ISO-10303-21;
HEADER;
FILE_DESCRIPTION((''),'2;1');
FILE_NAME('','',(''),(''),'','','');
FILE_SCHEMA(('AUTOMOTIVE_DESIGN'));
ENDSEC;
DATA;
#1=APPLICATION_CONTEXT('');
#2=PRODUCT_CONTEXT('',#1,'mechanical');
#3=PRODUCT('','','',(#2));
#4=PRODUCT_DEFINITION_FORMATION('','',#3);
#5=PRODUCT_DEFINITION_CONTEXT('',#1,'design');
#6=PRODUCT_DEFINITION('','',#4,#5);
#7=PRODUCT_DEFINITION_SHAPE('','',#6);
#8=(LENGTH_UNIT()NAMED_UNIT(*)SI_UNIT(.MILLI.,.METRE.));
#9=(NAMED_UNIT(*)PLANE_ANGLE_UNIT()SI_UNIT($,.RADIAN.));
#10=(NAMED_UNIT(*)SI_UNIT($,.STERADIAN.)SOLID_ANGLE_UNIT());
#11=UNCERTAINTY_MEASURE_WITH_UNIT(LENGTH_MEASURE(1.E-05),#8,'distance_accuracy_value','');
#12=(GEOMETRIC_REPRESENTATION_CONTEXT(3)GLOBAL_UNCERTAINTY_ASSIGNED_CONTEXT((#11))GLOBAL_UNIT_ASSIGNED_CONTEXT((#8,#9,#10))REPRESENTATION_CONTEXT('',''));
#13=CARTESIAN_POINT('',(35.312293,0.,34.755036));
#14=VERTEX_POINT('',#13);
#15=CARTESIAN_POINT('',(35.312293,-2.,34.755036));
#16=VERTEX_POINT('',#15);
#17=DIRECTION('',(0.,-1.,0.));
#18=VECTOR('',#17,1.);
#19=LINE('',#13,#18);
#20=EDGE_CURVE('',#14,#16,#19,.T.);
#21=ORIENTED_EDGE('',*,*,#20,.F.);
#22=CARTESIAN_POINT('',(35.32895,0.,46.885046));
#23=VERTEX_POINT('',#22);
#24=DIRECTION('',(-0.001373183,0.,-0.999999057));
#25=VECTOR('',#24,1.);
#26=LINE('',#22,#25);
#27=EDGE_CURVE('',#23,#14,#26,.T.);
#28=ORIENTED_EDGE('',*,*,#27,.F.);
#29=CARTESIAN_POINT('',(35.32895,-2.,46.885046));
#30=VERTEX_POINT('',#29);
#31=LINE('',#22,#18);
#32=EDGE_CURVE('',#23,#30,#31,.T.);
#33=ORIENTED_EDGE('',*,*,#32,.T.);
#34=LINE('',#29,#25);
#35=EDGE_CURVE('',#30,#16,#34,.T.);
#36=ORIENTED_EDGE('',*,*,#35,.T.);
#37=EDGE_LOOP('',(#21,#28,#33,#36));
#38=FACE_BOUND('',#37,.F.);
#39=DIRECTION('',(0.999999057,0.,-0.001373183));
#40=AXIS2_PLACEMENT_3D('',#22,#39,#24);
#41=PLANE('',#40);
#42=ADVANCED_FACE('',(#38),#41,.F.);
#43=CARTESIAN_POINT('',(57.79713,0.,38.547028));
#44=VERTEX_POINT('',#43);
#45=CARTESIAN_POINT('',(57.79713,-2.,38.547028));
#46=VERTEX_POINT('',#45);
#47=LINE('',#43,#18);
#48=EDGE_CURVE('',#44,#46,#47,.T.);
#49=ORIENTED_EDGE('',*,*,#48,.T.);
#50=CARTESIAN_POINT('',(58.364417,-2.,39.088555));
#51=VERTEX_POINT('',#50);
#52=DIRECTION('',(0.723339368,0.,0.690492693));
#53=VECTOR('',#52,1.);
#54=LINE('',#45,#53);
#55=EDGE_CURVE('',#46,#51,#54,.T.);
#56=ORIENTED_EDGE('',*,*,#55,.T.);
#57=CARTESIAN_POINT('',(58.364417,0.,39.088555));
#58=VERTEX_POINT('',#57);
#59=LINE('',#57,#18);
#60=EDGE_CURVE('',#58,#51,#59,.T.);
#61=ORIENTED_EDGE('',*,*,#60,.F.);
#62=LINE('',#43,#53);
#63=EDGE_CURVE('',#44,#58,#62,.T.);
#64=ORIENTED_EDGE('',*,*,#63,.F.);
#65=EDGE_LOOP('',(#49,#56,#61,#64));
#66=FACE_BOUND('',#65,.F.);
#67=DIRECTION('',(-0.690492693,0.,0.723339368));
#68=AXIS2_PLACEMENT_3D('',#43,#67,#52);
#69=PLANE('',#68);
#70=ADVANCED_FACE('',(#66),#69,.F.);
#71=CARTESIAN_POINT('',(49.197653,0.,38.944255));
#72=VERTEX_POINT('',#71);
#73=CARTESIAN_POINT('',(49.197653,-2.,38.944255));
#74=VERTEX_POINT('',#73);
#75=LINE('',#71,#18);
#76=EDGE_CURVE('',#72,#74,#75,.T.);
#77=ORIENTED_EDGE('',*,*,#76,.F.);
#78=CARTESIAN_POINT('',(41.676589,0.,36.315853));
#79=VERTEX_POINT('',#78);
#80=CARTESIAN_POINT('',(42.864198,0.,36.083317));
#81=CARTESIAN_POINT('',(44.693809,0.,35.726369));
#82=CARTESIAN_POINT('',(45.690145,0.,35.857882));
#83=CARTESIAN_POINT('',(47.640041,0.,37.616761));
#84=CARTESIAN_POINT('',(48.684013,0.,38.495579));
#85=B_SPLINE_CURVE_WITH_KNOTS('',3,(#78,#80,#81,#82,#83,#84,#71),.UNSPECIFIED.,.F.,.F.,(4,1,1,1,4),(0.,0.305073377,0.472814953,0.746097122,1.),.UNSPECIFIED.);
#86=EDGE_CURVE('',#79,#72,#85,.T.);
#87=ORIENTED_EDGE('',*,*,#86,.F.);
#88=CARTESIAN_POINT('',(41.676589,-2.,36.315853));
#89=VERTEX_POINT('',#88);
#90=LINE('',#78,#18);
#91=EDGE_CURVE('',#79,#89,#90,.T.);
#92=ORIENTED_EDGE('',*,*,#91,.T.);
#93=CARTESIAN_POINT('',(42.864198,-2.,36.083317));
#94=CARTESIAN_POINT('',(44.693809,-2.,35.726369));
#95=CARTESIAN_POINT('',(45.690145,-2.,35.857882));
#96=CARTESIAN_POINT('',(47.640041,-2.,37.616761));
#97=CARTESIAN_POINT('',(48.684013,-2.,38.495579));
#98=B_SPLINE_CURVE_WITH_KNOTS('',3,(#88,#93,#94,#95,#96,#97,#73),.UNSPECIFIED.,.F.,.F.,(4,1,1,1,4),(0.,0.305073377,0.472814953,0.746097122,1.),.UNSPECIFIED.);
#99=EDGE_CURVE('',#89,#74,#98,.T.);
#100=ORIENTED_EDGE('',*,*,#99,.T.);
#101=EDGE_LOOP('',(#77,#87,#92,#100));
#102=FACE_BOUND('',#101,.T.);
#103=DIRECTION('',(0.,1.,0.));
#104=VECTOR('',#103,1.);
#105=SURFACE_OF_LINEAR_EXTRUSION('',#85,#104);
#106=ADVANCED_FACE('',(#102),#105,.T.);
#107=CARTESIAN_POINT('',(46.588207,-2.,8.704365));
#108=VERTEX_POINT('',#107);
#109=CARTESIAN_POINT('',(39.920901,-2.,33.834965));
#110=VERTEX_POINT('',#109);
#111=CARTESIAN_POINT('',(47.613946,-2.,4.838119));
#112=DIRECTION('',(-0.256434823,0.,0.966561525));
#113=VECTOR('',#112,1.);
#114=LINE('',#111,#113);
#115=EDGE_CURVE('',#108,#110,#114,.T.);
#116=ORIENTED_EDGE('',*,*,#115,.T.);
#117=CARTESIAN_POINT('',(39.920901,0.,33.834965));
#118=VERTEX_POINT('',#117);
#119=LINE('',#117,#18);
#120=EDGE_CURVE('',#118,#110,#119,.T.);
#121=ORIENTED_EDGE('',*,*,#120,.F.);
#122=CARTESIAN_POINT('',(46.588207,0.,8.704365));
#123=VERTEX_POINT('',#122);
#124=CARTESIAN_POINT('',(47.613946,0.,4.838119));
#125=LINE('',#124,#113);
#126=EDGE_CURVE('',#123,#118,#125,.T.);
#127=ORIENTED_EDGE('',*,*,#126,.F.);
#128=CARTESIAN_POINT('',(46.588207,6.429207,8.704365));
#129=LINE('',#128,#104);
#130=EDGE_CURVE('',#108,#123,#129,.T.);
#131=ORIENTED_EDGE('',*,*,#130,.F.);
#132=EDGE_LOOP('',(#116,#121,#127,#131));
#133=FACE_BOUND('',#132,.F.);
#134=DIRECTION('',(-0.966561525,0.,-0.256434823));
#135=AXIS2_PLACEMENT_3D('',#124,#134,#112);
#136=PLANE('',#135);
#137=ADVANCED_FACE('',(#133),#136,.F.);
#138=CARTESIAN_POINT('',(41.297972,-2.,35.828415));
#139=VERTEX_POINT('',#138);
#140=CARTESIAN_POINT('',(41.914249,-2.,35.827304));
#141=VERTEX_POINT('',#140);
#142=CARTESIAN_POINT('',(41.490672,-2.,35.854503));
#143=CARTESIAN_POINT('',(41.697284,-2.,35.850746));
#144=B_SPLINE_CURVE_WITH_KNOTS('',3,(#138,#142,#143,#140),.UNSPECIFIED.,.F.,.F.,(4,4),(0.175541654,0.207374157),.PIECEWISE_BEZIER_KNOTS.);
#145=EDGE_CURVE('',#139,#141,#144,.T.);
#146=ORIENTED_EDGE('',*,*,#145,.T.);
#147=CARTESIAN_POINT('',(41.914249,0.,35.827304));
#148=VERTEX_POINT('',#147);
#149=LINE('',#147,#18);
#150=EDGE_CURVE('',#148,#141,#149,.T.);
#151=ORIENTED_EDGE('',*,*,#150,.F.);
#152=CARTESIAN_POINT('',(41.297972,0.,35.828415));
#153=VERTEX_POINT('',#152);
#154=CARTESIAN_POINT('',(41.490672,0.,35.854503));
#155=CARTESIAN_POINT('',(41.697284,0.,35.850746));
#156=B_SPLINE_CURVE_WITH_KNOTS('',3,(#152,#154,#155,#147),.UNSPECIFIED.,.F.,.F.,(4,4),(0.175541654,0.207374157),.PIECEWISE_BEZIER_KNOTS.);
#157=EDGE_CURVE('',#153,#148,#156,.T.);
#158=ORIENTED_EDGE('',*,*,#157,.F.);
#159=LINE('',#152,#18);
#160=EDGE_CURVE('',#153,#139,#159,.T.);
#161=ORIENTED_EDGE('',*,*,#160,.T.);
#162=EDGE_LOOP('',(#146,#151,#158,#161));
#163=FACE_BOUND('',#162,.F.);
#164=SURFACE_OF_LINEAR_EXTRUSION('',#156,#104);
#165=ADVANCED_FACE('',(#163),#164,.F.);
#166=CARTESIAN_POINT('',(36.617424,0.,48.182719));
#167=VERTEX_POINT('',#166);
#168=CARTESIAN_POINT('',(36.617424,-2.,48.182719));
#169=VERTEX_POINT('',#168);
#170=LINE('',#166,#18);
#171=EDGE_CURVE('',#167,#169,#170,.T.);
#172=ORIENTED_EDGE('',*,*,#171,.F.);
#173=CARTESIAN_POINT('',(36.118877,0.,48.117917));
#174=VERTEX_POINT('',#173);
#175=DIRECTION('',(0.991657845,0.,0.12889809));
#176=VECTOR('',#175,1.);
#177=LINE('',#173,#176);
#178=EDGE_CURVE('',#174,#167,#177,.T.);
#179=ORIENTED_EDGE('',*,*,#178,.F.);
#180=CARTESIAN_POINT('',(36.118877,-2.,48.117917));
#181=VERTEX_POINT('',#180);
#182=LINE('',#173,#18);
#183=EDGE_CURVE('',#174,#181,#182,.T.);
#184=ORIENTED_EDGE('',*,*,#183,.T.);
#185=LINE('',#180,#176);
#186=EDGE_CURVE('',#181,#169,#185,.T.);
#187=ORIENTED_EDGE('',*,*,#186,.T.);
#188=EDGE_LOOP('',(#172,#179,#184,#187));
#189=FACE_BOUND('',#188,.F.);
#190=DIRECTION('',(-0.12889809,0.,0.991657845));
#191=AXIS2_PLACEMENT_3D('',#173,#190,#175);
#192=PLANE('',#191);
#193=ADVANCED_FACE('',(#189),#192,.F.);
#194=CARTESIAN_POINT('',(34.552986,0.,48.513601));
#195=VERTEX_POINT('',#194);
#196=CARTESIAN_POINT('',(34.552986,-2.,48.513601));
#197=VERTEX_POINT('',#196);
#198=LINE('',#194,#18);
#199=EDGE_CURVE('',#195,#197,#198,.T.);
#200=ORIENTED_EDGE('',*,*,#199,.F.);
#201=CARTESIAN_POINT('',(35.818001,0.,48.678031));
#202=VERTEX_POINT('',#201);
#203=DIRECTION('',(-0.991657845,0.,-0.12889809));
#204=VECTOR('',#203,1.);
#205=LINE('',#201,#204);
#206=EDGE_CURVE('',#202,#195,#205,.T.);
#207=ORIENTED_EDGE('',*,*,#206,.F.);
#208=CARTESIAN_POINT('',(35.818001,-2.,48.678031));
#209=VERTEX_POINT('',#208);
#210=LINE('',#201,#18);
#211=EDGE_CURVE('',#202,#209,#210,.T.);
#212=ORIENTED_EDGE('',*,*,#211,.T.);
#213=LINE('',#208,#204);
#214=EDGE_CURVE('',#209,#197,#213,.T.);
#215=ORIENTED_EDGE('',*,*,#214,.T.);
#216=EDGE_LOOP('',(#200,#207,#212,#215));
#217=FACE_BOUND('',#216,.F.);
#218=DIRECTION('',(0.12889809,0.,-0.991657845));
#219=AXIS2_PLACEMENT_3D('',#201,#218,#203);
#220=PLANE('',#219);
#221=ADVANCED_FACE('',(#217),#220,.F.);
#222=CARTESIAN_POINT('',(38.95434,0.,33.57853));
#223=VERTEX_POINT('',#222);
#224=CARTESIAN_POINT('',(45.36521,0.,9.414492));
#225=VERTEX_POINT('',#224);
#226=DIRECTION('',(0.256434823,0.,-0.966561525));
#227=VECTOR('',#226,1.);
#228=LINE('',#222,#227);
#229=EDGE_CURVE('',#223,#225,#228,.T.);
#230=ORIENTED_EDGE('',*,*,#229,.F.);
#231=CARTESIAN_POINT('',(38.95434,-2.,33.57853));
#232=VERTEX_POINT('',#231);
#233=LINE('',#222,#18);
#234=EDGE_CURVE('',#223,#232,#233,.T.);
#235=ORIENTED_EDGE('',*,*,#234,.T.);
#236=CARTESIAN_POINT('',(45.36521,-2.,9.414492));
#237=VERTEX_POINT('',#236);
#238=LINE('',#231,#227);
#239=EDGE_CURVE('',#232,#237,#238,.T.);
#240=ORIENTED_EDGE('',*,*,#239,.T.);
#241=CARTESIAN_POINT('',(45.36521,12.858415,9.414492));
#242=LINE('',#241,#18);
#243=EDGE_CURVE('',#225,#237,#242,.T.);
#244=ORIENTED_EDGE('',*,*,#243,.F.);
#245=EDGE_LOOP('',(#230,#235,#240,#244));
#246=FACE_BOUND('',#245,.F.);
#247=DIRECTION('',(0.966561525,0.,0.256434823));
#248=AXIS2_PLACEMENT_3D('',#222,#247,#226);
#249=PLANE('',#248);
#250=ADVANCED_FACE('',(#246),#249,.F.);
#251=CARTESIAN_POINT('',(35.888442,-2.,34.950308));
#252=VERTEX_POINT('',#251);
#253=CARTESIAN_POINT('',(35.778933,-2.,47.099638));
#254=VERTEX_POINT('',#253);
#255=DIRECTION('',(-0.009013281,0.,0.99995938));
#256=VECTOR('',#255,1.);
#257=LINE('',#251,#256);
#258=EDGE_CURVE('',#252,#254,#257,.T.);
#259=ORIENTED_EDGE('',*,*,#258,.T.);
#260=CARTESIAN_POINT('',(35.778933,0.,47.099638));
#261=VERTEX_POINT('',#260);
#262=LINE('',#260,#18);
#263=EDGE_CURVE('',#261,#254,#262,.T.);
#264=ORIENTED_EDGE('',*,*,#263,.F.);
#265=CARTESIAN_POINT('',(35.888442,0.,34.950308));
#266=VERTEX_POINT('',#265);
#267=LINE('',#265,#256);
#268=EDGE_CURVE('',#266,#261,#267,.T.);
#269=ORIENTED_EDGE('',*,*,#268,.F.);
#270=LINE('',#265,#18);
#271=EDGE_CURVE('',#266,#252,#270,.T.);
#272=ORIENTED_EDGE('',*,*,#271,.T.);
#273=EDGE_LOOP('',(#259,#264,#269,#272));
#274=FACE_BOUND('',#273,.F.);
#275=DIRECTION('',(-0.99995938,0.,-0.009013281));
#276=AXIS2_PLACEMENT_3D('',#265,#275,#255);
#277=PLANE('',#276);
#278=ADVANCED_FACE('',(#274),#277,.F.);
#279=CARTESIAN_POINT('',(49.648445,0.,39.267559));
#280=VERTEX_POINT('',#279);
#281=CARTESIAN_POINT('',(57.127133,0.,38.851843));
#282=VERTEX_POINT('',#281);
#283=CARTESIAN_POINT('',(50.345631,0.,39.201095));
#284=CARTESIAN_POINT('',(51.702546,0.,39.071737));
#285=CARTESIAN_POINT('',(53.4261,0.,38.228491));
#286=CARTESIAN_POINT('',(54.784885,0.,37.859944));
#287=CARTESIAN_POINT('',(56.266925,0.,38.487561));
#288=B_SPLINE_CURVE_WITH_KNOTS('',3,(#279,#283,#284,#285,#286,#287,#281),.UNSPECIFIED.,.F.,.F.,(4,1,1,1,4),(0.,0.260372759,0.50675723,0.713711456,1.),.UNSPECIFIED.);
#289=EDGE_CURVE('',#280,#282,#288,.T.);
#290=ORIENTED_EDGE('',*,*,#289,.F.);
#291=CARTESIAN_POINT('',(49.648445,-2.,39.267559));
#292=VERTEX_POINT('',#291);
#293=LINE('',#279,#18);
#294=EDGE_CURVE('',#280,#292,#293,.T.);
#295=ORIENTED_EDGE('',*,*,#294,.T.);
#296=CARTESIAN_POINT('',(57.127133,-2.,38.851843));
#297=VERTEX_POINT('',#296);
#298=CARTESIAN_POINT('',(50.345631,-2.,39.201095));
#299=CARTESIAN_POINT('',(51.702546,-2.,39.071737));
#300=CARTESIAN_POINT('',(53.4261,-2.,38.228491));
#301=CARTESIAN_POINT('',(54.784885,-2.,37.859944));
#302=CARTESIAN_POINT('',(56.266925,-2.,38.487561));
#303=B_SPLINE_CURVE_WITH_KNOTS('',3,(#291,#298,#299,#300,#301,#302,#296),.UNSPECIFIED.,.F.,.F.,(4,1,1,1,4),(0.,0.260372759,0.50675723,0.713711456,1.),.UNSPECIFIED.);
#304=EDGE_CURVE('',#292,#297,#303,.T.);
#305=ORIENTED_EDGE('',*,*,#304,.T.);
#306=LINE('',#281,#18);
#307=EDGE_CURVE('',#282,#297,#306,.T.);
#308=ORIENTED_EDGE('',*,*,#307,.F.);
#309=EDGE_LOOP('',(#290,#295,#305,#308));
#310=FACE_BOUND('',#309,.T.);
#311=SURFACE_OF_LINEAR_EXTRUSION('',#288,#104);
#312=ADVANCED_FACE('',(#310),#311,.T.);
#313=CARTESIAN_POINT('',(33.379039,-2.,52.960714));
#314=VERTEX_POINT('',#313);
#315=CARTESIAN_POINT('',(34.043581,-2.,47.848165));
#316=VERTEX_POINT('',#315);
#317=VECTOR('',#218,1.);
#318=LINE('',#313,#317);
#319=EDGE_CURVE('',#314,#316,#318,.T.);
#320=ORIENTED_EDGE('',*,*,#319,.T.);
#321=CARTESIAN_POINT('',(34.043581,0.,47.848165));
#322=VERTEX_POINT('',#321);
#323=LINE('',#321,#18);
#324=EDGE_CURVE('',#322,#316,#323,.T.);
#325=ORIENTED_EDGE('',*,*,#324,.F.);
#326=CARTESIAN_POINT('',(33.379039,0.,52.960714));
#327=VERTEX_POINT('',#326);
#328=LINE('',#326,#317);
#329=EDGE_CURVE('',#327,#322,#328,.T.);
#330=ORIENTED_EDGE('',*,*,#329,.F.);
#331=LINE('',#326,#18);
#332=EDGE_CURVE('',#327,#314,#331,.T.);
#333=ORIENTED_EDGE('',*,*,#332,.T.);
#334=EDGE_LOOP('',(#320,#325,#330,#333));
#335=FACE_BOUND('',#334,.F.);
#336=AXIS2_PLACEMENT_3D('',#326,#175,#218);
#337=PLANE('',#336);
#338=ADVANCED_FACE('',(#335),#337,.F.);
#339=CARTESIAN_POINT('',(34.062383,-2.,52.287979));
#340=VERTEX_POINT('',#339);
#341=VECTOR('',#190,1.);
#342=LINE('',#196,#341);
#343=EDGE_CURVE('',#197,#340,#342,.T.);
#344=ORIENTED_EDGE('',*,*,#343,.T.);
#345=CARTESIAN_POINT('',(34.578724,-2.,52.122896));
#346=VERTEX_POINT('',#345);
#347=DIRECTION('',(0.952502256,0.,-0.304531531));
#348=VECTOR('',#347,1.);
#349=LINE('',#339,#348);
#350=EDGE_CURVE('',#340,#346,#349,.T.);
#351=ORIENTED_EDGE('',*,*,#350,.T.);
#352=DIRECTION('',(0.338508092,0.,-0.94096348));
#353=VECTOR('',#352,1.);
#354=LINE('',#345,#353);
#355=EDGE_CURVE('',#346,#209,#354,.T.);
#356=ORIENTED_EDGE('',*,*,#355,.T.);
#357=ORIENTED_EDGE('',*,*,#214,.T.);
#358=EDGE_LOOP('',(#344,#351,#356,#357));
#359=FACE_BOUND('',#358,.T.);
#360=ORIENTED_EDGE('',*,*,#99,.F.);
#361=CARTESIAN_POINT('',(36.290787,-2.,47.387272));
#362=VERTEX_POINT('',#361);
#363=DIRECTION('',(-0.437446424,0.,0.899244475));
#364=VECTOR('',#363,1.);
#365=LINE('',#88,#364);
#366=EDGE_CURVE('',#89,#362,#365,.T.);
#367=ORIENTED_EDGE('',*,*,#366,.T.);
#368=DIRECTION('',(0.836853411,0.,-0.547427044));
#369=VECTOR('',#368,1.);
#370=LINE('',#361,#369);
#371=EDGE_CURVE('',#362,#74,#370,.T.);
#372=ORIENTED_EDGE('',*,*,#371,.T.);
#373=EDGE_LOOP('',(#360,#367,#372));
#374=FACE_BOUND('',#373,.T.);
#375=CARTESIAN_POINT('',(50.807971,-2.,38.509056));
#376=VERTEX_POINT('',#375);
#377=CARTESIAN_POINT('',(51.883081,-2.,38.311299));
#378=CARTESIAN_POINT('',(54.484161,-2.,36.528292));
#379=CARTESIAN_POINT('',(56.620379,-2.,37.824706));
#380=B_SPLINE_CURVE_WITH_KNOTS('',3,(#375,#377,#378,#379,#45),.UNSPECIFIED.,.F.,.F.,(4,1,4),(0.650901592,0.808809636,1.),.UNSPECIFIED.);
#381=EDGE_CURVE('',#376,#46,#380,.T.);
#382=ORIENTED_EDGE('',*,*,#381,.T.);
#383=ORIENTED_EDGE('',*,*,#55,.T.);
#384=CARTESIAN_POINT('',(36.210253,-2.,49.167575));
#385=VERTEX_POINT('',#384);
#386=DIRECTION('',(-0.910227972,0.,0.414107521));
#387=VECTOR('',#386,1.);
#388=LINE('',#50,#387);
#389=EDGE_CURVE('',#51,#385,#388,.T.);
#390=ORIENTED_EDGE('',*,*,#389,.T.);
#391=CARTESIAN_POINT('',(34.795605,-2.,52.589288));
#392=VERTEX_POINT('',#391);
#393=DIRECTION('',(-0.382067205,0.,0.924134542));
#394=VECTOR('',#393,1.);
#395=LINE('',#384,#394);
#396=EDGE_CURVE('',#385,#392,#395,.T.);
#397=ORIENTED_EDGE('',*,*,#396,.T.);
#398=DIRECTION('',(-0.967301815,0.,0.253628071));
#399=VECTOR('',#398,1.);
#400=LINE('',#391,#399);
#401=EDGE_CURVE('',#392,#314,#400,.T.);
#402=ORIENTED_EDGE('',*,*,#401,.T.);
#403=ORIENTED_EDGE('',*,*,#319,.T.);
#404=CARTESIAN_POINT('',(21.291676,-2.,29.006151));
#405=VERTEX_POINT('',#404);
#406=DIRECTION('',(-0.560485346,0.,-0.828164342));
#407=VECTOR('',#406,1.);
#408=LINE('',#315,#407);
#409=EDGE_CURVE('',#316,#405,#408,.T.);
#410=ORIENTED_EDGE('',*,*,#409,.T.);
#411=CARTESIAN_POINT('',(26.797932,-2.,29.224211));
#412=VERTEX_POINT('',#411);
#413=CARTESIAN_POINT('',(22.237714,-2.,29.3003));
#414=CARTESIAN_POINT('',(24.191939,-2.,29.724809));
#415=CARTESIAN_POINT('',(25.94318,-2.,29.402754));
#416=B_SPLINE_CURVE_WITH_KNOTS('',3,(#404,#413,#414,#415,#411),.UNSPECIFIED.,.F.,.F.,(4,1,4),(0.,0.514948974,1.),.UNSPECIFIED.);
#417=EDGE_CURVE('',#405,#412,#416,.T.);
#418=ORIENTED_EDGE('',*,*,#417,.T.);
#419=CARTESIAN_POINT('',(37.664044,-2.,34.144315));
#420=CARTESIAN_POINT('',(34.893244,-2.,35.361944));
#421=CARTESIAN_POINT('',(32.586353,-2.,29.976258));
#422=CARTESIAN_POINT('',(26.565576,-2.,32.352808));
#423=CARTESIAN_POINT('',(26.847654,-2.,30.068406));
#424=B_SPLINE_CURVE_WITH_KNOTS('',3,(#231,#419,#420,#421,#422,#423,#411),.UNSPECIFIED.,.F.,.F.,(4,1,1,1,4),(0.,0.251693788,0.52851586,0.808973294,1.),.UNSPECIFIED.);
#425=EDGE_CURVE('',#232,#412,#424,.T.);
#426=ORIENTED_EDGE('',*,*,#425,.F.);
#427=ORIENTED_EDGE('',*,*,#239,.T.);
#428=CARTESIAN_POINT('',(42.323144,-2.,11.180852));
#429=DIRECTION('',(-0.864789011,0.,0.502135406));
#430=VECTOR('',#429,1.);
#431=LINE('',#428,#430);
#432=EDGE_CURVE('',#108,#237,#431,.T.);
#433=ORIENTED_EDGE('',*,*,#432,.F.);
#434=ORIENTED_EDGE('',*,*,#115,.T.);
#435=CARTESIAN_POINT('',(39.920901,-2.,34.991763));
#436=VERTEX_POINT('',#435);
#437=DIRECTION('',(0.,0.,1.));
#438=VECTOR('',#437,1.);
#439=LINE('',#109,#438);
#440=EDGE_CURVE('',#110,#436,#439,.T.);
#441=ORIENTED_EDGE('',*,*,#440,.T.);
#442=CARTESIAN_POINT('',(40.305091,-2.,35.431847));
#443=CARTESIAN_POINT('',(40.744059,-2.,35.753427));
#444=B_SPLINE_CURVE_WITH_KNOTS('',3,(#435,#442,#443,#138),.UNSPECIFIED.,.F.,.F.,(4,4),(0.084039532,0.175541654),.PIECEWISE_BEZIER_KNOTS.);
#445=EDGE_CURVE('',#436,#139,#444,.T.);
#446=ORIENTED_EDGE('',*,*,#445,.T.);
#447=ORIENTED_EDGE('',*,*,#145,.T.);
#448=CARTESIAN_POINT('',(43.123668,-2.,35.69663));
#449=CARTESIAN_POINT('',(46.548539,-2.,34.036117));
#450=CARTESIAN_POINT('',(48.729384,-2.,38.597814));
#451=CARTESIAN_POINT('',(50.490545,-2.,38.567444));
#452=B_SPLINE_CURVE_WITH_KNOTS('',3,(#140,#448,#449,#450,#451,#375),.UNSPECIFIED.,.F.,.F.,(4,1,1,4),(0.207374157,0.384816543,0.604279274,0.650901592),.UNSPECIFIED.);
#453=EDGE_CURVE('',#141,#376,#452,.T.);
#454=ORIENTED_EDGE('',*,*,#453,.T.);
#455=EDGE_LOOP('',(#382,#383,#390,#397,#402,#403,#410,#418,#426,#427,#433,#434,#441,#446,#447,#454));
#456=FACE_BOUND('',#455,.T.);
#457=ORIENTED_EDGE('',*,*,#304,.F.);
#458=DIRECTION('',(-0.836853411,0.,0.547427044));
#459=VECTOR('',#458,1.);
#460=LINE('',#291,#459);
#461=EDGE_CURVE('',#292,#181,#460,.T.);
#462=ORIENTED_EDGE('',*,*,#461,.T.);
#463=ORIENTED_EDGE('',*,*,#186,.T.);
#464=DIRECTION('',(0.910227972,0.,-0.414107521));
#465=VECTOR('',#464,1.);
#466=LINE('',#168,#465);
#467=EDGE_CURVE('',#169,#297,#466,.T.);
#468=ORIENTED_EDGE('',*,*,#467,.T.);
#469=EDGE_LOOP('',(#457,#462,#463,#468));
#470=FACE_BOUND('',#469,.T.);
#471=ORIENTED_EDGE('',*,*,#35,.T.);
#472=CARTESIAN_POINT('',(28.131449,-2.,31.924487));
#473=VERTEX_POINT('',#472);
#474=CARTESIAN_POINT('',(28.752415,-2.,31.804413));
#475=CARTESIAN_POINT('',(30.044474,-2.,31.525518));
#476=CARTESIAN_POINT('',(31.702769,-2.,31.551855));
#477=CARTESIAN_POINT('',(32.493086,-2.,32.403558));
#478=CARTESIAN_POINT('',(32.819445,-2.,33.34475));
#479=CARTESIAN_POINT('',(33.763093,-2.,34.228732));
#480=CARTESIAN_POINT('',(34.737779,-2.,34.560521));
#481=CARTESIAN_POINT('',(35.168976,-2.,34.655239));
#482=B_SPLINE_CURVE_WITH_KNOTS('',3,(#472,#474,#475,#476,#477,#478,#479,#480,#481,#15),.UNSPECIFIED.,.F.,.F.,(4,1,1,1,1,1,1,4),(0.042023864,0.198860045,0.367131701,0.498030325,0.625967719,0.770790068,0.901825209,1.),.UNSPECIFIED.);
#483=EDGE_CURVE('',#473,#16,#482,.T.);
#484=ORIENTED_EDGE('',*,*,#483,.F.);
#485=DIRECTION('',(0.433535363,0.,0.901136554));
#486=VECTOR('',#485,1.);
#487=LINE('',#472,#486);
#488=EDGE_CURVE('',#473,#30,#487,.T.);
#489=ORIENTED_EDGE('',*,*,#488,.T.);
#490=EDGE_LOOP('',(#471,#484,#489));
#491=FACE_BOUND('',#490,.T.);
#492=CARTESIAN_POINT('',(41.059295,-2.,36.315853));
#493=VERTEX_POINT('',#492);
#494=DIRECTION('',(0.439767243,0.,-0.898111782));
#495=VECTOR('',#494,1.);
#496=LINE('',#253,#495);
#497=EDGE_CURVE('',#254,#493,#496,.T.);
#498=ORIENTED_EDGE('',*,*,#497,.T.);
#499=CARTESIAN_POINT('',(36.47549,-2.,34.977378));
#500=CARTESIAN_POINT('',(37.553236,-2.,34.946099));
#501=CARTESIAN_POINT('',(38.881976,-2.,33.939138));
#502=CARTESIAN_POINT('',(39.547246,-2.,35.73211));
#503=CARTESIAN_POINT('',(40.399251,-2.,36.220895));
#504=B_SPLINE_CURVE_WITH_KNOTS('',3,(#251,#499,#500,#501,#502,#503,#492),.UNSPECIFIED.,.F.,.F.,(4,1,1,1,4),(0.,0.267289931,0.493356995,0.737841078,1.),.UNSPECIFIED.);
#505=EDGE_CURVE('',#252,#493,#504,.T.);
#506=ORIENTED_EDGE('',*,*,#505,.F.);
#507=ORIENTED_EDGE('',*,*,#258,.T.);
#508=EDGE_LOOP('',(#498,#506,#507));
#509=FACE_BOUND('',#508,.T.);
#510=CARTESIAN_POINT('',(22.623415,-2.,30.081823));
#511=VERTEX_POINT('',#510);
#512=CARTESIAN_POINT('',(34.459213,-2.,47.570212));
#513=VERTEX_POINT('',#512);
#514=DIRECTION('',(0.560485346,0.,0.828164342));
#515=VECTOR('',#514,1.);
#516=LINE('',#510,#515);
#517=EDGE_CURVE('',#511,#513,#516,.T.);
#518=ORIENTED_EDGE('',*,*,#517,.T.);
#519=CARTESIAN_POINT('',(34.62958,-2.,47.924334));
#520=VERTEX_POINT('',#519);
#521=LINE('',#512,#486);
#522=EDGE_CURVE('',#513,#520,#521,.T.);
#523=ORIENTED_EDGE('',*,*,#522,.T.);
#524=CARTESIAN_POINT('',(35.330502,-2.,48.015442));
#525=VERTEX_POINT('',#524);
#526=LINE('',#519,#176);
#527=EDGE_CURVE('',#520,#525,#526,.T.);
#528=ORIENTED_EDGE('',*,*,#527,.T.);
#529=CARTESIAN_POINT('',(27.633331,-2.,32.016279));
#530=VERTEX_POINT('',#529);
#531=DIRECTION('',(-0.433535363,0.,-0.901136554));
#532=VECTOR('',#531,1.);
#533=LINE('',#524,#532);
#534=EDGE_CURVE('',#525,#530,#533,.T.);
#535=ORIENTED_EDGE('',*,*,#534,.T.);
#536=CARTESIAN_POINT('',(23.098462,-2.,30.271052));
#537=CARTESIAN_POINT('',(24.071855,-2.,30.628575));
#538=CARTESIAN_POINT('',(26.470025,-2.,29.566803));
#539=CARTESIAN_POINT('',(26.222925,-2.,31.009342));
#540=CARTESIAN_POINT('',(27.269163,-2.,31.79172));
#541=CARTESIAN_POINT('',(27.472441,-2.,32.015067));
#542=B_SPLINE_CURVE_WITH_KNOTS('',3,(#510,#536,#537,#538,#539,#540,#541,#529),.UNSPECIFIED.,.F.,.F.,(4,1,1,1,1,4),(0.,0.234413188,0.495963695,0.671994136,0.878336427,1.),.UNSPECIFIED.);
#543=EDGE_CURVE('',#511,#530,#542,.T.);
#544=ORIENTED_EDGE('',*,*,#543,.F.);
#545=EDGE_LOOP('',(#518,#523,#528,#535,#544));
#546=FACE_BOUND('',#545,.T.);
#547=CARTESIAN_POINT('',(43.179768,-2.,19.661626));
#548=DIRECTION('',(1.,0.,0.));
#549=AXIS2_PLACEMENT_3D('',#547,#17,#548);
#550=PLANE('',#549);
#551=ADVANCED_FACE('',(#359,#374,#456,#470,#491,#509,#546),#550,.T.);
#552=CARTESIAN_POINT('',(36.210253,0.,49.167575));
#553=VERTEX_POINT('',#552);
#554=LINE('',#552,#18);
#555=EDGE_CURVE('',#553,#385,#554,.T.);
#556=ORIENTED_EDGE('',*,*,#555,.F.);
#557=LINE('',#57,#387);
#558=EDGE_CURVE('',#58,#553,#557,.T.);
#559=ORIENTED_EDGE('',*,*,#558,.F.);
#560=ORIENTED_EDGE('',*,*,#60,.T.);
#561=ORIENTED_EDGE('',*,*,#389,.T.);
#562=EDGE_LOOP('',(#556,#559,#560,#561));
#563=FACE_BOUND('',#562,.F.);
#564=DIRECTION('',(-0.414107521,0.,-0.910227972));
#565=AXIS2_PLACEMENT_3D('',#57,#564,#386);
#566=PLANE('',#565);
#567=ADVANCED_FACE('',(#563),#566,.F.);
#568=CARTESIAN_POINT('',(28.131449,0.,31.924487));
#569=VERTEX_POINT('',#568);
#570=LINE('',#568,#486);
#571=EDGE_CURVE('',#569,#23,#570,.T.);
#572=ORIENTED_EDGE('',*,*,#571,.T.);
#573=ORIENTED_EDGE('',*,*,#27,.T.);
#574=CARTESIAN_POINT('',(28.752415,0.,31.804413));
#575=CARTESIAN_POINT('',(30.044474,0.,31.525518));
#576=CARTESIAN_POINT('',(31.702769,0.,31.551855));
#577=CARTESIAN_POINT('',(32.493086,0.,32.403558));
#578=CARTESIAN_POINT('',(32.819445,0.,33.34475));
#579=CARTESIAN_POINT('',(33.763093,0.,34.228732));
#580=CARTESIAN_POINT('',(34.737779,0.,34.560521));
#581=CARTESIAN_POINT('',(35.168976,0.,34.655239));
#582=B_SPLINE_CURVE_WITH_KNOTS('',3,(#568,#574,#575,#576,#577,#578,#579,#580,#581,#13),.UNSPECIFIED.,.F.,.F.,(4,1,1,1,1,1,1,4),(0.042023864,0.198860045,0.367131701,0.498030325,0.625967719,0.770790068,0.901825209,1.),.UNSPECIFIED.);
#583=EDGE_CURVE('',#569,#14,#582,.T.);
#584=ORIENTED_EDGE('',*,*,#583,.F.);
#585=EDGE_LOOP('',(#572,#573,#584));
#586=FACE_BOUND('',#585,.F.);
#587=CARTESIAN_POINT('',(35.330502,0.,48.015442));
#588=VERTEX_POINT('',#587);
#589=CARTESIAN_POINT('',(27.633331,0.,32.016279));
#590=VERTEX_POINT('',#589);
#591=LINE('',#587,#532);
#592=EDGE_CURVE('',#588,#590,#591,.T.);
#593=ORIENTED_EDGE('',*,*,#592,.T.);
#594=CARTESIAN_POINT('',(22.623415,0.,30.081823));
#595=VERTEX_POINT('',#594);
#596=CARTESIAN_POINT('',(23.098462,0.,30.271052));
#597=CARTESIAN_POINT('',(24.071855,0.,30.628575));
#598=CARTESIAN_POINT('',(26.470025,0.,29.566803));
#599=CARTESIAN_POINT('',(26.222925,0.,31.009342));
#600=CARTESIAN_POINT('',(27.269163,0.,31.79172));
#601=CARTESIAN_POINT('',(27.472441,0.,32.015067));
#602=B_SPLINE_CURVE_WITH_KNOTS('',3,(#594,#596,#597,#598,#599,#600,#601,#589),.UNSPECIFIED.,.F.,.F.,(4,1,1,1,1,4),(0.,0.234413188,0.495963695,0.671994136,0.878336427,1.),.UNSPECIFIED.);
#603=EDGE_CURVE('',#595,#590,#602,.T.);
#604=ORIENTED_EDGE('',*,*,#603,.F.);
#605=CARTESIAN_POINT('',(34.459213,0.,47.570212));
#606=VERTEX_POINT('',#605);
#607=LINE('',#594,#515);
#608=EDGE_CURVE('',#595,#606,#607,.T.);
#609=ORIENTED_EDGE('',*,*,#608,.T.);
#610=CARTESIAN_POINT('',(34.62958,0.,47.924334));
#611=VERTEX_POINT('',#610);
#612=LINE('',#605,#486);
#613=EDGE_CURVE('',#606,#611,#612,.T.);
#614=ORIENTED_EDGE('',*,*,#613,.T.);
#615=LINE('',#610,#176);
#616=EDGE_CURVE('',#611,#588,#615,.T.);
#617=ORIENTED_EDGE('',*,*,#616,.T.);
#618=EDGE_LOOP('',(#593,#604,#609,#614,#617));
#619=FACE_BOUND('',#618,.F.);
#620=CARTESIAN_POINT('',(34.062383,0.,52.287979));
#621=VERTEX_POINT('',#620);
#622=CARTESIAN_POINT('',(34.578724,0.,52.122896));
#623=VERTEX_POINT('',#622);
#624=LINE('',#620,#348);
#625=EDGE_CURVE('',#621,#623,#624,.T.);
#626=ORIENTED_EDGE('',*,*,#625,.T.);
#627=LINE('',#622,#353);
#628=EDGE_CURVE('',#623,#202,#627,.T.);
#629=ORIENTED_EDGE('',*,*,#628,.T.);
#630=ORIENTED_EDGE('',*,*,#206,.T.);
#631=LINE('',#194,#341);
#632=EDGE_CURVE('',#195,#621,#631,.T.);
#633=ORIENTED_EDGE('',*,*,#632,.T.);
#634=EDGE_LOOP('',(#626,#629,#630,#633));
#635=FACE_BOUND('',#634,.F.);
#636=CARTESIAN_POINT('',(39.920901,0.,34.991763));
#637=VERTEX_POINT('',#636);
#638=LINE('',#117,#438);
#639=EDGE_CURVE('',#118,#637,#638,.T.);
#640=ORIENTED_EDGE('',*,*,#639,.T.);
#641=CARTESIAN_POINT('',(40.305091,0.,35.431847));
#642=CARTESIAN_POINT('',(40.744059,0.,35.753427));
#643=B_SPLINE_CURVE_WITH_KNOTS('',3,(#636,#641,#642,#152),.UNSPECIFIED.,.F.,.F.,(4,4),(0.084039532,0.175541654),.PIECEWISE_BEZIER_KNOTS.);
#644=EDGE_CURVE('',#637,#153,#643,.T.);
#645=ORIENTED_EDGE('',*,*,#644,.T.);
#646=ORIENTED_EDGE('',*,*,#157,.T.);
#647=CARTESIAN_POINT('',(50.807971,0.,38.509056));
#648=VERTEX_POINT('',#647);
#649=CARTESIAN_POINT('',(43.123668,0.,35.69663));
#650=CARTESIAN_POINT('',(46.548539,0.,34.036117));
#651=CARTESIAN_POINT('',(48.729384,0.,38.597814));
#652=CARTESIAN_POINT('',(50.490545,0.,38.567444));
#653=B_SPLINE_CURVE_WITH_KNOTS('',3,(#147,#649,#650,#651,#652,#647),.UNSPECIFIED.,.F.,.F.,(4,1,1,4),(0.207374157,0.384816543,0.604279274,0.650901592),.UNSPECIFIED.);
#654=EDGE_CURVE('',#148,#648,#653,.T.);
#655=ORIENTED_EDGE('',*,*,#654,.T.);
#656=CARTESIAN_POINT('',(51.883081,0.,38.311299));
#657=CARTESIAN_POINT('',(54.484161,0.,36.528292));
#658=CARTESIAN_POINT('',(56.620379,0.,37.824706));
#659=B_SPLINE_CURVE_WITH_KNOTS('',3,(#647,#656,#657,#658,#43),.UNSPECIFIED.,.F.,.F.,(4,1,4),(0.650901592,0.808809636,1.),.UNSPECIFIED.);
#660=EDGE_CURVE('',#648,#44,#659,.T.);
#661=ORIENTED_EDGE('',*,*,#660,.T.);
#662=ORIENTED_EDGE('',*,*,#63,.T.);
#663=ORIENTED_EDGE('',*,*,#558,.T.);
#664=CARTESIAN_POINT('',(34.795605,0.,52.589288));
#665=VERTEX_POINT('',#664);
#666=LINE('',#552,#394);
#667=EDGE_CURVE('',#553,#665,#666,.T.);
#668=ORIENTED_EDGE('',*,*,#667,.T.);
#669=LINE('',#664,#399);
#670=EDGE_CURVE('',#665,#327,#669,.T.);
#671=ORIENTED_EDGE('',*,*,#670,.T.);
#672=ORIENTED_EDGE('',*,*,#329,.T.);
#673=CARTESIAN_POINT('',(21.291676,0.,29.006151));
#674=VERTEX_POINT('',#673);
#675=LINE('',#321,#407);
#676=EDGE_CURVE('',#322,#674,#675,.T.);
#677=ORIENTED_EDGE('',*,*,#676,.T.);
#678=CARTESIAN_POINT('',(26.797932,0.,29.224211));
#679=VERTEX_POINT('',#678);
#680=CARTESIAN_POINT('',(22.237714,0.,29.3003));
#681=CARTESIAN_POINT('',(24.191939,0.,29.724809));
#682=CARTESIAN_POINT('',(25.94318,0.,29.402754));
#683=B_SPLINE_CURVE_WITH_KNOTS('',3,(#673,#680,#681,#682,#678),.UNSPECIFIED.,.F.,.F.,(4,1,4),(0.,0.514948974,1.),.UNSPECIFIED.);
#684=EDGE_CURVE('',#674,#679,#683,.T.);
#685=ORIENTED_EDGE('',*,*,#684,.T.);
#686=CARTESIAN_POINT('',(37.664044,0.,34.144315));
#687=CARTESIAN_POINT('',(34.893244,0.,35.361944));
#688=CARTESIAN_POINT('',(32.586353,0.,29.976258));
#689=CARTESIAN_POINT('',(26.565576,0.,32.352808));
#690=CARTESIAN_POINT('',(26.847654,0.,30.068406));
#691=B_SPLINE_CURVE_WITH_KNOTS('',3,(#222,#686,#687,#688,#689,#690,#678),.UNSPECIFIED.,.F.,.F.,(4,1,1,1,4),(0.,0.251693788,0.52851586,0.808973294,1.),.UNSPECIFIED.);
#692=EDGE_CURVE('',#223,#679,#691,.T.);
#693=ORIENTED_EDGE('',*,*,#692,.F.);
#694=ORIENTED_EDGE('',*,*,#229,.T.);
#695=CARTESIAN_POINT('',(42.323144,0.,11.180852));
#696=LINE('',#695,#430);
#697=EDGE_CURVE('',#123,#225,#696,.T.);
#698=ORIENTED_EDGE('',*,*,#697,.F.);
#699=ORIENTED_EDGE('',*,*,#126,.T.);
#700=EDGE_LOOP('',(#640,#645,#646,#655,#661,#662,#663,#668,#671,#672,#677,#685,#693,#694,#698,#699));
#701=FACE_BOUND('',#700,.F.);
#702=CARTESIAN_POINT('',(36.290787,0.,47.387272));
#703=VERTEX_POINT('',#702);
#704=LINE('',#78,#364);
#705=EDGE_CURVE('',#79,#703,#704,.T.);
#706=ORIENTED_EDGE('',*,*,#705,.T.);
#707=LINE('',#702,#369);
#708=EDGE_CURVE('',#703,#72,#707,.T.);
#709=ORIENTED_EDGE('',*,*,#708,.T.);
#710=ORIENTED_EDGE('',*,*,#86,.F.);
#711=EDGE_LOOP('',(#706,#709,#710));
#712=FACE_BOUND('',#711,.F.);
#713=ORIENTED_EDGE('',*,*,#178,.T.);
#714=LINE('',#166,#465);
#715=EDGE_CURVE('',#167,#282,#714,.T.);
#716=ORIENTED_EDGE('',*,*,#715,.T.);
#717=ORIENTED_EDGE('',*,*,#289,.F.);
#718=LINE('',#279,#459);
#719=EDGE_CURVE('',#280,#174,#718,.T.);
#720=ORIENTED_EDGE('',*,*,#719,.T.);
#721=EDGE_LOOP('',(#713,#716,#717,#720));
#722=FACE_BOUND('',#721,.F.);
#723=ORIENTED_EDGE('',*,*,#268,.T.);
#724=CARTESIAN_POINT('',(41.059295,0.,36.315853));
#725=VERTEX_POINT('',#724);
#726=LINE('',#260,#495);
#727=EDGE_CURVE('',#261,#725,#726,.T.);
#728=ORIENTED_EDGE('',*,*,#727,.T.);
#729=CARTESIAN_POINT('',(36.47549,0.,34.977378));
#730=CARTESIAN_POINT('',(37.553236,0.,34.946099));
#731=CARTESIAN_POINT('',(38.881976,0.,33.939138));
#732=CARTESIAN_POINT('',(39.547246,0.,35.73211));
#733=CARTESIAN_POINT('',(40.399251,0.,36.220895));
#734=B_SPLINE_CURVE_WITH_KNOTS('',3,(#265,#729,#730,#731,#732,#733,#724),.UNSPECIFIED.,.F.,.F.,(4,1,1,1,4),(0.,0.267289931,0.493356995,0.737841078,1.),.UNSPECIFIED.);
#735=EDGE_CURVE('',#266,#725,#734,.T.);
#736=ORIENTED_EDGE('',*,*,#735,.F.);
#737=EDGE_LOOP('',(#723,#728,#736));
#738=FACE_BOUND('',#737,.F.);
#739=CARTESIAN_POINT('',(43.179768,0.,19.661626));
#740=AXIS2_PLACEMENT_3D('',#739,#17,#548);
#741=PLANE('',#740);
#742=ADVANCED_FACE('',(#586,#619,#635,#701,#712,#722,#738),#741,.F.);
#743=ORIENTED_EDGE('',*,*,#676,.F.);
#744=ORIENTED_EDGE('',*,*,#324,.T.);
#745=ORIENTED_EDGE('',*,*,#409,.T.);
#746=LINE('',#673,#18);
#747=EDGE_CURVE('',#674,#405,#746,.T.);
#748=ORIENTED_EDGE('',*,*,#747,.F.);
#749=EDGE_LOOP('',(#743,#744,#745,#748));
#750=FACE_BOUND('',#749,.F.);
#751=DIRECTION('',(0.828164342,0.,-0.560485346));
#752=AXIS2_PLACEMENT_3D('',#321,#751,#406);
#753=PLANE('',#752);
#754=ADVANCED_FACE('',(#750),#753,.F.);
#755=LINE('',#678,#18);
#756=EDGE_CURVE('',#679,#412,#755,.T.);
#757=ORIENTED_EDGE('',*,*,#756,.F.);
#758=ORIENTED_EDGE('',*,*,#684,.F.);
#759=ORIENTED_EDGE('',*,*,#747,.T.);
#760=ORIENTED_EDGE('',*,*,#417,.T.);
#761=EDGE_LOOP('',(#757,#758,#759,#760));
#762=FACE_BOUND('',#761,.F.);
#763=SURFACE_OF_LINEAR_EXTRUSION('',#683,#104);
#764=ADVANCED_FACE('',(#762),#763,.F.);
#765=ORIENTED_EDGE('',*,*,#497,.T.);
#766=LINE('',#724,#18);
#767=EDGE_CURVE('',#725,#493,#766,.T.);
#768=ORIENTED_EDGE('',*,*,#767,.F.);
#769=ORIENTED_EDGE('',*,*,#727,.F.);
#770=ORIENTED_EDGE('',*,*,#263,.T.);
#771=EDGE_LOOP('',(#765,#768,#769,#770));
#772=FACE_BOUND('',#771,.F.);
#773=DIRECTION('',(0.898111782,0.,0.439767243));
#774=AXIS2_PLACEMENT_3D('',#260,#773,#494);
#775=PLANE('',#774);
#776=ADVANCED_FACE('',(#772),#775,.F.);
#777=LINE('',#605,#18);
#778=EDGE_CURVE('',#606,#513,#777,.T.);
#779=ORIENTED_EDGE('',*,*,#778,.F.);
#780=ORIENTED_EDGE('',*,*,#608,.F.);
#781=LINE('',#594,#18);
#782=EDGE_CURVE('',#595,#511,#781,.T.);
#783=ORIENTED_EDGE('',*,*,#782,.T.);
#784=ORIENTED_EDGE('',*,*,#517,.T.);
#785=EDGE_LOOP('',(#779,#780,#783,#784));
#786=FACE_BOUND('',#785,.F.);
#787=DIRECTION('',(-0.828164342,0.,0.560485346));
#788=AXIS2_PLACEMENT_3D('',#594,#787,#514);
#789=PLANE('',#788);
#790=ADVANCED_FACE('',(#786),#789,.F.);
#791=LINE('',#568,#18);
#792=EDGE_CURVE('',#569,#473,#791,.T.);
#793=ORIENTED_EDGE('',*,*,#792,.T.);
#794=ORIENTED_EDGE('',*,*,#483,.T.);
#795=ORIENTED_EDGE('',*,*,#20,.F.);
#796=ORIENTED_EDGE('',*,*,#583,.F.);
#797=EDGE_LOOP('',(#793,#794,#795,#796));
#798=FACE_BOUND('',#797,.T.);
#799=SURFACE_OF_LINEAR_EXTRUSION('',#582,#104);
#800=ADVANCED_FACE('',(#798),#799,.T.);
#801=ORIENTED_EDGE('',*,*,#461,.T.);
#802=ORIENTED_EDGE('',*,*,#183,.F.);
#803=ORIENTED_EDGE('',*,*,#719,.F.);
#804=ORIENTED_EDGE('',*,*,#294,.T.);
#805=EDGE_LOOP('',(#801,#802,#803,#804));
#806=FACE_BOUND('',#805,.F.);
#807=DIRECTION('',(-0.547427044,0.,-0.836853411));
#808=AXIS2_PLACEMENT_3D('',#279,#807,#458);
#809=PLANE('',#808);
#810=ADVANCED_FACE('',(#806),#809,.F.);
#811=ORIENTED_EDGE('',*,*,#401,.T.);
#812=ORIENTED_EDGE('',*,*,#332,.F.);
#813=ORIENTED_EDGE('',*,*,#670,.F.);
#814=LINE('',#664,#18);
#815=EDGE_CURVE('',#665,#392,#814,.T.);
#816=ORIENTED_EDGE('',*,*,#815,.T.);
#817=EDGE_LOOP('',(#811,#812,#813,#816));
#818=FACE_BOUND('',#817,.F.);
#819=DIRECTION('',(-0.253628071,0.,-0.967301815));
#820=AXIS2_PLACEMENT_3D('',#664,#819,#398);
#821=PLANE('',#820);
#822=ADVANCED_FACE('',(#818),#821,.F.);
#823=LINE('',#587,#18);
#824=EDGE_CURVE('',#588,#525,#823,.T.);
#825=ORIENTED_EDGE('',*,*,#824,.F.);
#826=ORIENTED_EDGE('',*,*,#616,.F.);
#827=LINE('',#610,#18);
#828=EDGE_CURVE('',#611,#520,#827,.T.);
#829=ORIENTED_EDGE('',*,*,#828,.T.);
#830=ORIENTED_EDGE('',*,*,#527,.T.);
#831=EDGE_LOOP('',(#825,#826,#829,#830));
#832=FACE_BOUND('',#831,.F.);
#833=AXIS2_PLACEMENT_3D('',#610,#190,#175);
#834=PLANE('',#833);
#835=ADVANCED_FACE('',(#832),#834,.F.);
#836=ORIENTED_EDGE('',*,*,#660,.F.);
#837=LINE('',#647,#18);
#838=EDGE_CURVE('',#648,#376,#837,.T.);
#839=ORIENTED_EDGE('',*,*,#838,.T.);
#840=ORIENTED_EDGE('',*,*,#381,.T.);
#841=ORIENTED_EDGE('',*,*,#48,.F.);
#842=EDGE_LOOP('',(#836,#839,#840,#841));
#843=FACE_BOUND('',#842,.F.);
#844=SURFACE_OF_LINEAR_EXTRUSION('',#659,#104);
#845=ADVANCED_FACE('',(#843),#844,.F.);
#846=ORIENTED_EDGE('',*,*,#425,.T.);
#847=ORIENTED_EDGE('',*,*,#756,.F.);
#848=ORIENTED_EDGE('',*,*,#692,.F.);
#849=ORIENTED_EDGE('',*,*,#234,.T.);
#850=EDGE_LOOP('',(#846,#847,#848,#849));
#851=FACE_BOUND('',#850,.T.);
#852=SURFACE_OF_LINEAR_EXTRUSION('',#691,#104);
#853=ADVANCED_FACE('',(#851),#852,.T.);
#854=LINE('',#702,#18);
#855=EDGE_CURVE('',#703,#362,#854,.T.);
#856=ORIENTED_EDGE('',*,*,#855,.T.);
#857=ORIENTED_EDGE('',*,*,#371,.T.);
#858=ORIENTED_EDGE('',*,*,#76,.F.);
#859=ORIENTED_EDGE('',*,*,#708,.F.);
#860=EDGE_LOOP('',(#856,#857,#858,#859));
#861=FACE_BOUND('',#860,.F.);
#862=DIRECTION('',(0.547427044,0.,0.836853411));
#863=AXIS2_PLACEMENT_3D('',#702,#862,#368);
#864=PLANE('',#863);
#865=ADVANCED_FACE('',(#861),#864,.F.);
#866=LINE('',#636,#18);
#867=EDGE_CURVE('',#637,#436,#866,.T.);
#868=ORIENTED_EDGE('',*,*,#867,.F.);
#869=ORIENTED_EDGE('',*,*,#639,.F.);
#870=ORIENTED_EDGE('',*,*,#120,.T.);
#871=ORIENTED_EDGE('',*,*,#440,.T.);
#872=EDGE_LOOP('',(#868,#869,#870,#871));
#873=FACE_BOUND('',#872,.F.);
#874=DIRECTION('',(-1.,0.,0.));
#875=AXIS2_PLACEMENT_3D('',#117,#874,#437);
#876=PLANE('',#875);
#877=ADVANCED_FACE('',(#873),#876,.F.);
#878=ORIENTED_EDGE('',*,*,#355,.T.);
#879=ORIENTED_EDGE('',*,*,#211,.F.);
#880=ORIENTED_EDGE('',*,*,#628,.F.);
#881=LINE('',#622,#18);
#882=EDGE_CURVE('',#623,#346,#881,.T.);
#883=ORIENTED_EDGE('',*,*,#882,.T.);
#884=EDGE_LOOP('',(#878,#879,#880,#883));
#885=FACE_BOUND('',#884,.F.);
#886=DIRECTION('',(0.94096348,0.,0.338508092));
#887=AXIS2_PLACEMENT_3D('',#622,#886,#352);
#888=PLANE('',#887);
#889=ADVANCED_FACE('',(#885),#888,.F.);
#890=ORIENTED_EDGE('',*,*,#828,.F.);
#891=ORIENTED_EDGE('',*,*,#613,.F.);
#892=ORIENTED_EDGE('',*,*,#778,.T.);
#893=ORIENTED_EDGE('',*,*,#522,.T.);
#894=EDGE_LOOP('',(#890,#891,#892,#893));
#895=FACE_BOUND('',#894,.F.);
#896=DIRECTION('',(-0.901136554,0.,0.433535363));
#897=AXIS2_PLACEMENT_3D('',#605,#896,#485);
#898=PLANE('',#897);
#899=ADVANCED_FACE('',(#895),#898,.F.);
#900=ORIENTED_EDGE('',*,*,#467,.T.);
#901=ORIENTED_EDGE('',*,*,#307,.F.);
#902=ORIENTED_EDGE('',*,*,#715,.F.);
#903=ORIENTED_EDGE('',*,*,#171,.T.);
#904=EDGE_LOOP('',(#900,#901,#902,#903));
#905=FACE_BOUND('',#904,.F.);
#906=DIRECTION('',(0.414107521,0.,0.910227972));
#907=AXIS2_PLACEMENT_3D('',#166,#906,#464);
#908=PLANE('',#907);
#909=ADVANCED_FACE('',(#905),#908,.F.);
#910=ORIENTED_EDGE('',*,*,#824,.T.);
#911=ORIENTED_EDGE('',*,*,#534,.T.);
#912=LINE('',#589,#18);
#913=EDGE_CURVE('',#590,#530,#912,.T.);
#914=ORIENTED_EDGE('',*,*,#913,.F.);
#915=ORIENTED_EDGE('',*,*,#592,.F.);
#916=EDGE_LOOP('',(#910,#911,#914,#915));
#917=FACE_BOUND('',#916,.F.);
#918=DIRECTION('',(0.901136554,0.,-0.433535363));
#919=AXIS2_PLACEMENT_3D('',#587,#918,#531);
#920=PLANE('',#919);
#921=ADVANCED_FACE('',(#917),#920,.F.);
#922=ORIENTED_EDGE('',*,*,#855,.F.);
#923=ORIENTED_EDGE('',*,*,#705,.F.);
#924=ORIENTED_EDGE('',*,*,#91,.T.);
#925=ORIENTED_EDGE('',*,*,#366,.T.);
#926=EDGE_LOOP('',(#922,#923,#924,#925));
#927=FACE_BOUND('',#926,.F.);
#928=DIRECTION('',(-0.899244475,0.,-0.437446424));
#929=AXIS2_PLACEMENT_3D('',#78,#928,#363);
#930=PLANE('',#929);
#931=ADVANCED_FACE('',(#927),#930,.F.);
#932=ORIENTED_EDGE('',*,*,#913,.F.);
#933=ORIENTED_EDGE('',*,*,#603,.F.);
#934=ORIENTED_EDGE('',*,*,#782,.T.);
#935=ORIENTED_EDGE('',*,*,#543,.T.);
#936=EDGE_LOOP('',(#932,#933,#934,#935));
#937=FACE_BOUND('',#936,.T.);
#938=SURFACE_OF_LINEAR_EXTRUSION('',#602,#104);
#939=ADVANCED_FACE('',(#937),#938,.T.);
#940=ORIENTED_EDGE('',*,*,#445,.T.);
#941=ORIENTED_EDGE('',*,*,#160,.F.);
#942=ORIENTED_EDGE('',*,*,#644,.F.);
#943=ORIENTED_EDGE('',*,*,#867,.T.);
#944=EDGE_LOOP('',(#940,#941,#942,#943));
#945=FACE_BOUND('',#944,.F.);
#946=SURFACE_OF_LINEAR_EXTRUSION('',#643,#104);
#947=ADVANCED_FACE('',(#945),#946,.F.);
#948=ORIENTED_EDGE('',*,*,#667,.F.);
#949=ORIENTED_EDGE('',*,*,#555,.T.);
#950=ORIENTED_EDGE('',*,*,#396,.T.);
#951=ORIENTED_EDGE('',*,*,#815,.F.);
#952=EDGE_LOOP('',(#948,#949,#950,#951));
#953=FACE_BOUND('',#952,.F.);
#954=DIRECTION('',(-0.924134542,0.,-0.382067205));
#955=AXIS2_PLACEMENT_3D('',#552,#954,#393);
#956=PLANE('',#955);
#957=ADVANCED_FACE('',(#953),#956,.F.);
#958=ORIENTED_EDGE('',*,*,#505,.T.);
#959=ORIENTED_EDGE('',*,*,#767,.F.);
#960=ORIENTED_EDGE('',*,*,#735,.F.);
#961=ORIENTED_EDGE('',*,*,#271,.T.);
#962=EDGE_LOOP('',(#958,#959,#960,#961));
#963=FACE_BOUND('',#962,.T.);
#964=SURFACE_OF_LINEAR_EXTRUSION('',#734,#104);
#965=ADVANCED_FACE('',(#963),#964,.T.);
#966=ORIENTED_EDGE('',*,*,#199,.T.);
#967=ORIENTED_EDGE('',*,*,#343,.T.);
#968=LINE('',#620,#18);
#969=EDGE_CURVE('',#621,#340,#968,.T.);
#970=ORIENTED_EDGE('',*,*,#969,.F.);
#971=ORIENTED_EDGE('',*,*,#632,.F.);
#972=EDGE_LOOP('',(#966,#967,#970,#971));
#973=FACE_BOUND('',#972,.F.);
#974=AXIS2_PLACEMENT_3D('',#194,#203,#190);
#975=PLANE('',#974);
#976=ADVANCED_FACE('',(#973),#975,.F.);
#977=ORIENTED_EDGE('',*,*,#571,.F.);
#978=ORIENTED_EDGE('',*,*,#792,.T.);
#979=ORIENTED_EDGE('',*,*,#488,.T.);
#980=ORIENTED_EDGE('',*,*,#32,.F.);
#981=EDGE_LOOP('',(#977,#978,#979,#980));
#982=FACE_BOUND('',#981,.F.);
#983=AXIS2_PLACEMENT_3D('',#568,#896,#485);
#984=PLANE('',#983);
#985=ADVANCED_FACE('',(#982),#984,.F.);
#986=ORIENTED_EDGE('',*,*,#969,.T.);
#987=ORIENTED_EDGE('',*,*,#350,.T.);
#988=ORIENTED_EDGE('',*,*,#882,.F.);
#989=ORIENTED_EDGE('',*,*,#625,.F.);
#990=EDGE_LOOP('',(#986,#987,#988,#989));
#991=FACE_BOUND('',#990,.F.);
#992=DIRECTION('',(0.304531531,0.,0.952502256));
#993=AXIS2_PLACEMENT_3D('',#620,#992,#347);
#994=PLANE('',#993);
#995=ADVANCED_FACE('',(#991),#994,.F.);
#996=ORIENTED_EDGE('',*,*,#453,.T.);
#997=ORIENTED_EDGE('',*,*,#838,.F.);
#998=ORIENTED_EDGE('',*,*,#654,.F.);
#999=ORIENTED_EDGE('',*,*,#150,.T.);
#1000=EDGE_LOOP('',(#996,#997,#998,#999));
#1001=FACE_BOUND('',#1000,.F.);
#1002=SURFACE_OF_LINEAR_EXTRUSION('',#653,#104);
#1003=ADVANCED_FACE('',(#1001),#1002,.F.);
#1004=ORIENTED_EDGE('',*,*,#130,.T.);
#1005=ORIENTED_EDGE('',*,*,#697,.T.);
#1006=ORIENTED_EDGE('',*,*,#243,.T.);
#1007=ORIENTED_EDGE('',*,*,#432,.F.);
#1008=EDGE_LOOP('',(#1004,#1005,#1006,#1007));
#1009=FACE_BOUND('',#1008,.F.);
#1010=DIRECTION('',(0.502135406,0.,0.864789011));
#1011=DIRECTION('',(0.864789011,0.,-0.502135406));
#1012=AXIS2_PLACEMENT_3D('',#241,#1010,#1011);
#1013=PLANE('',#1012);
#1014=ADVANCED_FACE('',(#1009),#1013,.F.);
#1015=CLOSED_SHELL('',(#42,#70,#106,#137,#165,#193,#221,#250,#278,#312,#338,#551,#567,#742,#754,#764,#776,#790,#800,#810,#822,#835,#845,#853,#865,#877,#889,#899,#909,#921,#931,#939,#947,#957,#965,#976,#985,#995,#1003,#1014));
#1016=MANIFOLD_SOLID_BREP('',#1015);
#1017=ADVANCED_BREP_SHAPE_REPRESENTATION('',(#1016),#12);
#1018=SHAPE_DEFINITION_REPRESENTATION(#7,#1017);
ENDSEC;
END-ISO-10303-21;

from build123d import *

# Parameters (mm, degrees)
F1_DEPTH    = 2
F2_T1_DEPTH = 27.7168298797


# Not quite as in the source:
# - a fillet or chamfer that OpenCascade refuses, or shapes differently, is made with other operations: its cross-section is extruded or revolved along the edge and cut away or added


with BuildPart() as f1:
    # F0 (on Front) → F1 (new body)
    with BuildSketch(Plane.XZ):
        with BuildLine():
            Line((38.9543399215, 33.578529954), (46.6473846136, 4.5816842054))
            Line((46.6473846136, 4.5816842054), (47.6139461386, 4.8381190285))
            Line((47.6139461386, 4.8381190285), (39.9209014464, 33.834964777))
            Line((39.9209014464, 33.834964777), (39.9209014464, 34.991762988))
            add(Edge.make_bspline(
                [(38.9543399215, 33.578529954), (39.261396009, 34.083414355), (39.5680450127, 34.5875702619), (39.9209014464, 34.991762988)],
                knots=[0, 0, 0, 0, 0.0840395323, 0.0840395323, 0.0840395323, 0.0840395323], degree=3))
        make_face()
        with BuildLine():
            add(Edge.make_bspline(
                [(38.9543399215, 33.578529954), (37.6640439923, 34.1443154), (34.8932435121, 35.3619439278), (32.5863528285, 29.9762581485), (26.5655761049, 32.3528079023), (26.8476535004, 30.0684064483), (26.7979316413, 29.2242113501)],
                knots=[0, 0, 0, 0, 0.2516937882, 0.52851586, 0.8089732942, 1, 1, 1, 1], degree=3))
            add(Edge.make_bspline(
                [(38.9543399215, 33.578529954), (39.261396009, 34.083414355), (39.5680450127, 34.5875702619), (39.9209014464, 34.991762988)],
                knots=[0, 0, 0, 0, 0.0840395323, 0.0840395323, 0.0840395323, 0.0840395323], degree=3))
            add(Edge.make_bspline(
                [(39.9209014464, 34.991762988), (40.305091024, 35.4318474469), (40.7440586925, 35.7534273237), (41.2979722023, 35.8284153044)],
                knots=[0.0840395323, 0.0840395323, 0.0840395323, 0.0840395323, 0.1755416542, 0.1755416542, 0.1755416542, 0.1755416542], degree=3))
            add(Edge.make_bspline(
                [(41.2979722023, 35.8284153044), (41.4906721415, 35.8545027334), (41.6972835341, 35.850746093), (41.914248864, 35.8273036468)],
                knots=[0.1755416542, 0.1755416542, 0.1755416542, 0.1755416542, 0.2073741569, 0.2073741569, 0.2073741569, 0.2073741569], degree=3))
            add(Edge.make_bspline(
                [(41.914248864, 35.8273036468), (43.1236682433, 35.696629549), (46.5485390265, 34.0361170247), (48.7293844979, 38.5978142218), (50.4905452243, 38.5674441057), (50.8079711977, 38.5090563461)],
                knots=[0.2073741569, 0.2073741569, 0.2073741569, 0.2073741569, 0.3848165425, 0.6042792737, 0.6509015915, 0.6509015915, 0.6509015915, 0.6509015915], degree=3))
            Line((50.8079711977, 38.5090563461), (49.6484453004, 39.2675593609))
            Line((49.6484453004, 39.2675593609), (36.1188769209, 48.1179165882))
            Line((36.1188769209, 48.1179165882), (36.6174241261, 48.182718962))
            Line((36.6174241261, 48.182718962), (57.1271326119, 38.8518427461))
            Line((57.1271326119, 38.8518427461), (57.7971301973, 38.5470278562))
            Line((57.7971301973, 38.5470278562), (58.3644174039, 39.0885546803))
            Line((58.3644174039, 39.0885546803), (36.2102526821, 49.1675750053))
            Line((36.2102526821, 49.1675750053), (34.7956053054, 52.5892884836))
            Line((34.7956053054, 52.5892884836), (33.3790388766, 52.9607144486))
            Line((33.3790388766, 52.9607144486), (34.0435805037, 47.848164531))
            Line((34.0435805037, 47.848164531), (21.2916761887, 29.0061510308))
            add(Edge.make_bspline(
                [(21.2916761887, 29.0061510308), (22.2377144422, 29.3003004789), (24.1919394004, 29.7248092747), (25.9431803037, 29.402753862), (26.7979316413, 29.2242113501)],
                knots=[0, 0, 0, 0, 0.5149489736, 1, 1, 1, 1], degree=3))
        make_face()
        with BuildLine():
            Line((35.3305023149, 48.0154417465), (27.6333307537, 32.0162793804))
            add(Edge.make_bspline(
                [(22.623414625, 30.0818228404), (23.0984624572, 30.271051787), (24.0718553407, 30.6285749561), (26.4700247065, 29.5668028622), (26.2229246754, 31.0093421737), (27.2691634193, 31.7917195395), (27.4724411863, 32.0150673015), (27.6333307537, 32.0162793804)],
                knots=[0, 0, 0, 0, 0.2344131875, 0.4959636953, 0.6719941358, 0.8783364267, 1, 1, 1, 1], degree=3))
            Line((22.623414625, 30.0818228404), (34.4592127341, 47.5702122015))
            Line((34.4592127341, 47.5702122015), (34.6295802641, 47.9243341999))
            Line((34.6295802641, 47.9243341999), (35.3305023149, 48.0154417465))
        make_face(mode=Mode.SUBTRACT)
        with BuildLine():
            add(Edge.make_bspline(
                [(28.1314488439, 31.9244866572), (28.7524146036, 31.8044131569), (30.0444740365, 31.5255182244), (31.7027687342, 31.5518548648), (32.4930864971, 32.4035579454), (32.8194445517, 33.3447504689), (33.7630925871, 34.2287315693), (34.7377791878, 34.5605212888), (35.1689763006, 34.6552392698), (35.3122933345, 34.7550361976)],
                knots=[0.0420238635, 0.0420238635, 0.0420238635, 0.0420238635, 0.1988600446, 0.3671317013, 0.4980303245, 0.6259677195, 0.7707900684, 0.901825209, 1, 1, 1, 1], degree=3))
            Line((28.1314488439, 31.9244866572), (35.3289500731, 46.8850458548))
            Line((35.3289500731, 46.8850458548), (35.3122933345, 34.7550361976))
        make_face(mode=Mode.SUBTRACT)
        with BuildLine():
            Line((35.7789325262, 47.0996380734), (41.0592946479, 36.3158529826))
            add(Edge.make_bspline(
                [(35.8884423072, 34.9503078622), (36.4754899607, 34.9773776718), (37.5532358859, 34.9460992821), (38.8819756802, 33.9391375769), (39.5472460755, 35.7321102048), (40.3992507331, 36.2208948371), (41.0592946479, 36.3158529826)],
                knots=[0, 0, 0, 0, 0.2672899311, 0.493356995, 0.7378410778, 1, 1, 1, 1], degree=3))
            Line((35.8884423072, 34.9503078622), (35.7789325262, 47.0996380734))
        make_face(mode=Mode.SUBTRACT)
        Polygon((35.8180012475, 48.678030682), (34.5529859469, 48.5136009278), (34.0623831223, 52.2879791273), (34.5787238251, 52.1228960279), align=None, mode=Mode.SUBTRACT)
        with BuildLine():
            add(Edge.make_bspline(
                [(41.6765891777, 36.3158529826), (42.8641978584, 36.0833171062), (44.6938094993, 35.7263694764), (45.6901446165, 35.8578817285), (47.6400405781, 37.6167605803), (48.6840130278, 38.4955786117), (49.1976533289, 38.9442550866)],
                knots=[0, 0, 0, 0, 0.305073377, 0.4728149529, 0.7460971216, 1, 1, 1, 1], degree=3))
            Line((41.6765891777, 36.3158529826), (36.2907871604, 47.3872721195))
            Line((36.2907871604, 47.3872721195), (49.1976533289, 38.9442550866))
        make_face(mode=Mode.SUBTRACT)
        with BuildLine():
            Line((49.6484453004, 39.2675593609), (50.8079711977, 38.5090563461))
            add(Edge.make_bspline(
                [(50.8079711977, 38.5090563461), (51.8830810784, 38.3112991915), (54.484160752, 36.5282918381), (56.6203789239, 37.8247061914), (57.7971301973, 38.5470278562)],
                knots=[0.6509015915, 0.6509015915, 0.6509015915, 0.6509015915, 0.8088096356, 1, 1, 1, 1], degree=3))
            Line((57.7971301973, 38.5470278562), (57.1271326119, 38.8518427461))
            add(Edge.make_bspline(
                [(49.6484453004, 39.2675593609), (50.3456305804, 39.2010948295), (51.7025455015, 39.0717365126), (53.4260999906, 38.2284905671), (54.784884825, 37.8599443173), (56.2669250792, 38.487560835), (57.1271326119, 38.8518427461)],
                knots=[0, 0, 0, 0, 0.2603727588, 0.5067572303, 0.7137114564, 1, 1, 1, 1], degree=3))
        make_face()
    extrude(amount=F1_DEPTH)

    # F2: chamfer of 5 on 1 edges, made by hand

    # F2_s2 → F2_t1 (cut)
    with BuildSketch(Plane.XZ.offset(-12.8584149398)):
        Polygon((45.3652104983, 9.4144918302), (51.4801922384, 5.8638583208), (46.6473846136, 4.5816842054), align=None)
    extrude(amount=F2_T1_DEPTH, mode=Mode.SUBTRACT)


solid = f1.part
